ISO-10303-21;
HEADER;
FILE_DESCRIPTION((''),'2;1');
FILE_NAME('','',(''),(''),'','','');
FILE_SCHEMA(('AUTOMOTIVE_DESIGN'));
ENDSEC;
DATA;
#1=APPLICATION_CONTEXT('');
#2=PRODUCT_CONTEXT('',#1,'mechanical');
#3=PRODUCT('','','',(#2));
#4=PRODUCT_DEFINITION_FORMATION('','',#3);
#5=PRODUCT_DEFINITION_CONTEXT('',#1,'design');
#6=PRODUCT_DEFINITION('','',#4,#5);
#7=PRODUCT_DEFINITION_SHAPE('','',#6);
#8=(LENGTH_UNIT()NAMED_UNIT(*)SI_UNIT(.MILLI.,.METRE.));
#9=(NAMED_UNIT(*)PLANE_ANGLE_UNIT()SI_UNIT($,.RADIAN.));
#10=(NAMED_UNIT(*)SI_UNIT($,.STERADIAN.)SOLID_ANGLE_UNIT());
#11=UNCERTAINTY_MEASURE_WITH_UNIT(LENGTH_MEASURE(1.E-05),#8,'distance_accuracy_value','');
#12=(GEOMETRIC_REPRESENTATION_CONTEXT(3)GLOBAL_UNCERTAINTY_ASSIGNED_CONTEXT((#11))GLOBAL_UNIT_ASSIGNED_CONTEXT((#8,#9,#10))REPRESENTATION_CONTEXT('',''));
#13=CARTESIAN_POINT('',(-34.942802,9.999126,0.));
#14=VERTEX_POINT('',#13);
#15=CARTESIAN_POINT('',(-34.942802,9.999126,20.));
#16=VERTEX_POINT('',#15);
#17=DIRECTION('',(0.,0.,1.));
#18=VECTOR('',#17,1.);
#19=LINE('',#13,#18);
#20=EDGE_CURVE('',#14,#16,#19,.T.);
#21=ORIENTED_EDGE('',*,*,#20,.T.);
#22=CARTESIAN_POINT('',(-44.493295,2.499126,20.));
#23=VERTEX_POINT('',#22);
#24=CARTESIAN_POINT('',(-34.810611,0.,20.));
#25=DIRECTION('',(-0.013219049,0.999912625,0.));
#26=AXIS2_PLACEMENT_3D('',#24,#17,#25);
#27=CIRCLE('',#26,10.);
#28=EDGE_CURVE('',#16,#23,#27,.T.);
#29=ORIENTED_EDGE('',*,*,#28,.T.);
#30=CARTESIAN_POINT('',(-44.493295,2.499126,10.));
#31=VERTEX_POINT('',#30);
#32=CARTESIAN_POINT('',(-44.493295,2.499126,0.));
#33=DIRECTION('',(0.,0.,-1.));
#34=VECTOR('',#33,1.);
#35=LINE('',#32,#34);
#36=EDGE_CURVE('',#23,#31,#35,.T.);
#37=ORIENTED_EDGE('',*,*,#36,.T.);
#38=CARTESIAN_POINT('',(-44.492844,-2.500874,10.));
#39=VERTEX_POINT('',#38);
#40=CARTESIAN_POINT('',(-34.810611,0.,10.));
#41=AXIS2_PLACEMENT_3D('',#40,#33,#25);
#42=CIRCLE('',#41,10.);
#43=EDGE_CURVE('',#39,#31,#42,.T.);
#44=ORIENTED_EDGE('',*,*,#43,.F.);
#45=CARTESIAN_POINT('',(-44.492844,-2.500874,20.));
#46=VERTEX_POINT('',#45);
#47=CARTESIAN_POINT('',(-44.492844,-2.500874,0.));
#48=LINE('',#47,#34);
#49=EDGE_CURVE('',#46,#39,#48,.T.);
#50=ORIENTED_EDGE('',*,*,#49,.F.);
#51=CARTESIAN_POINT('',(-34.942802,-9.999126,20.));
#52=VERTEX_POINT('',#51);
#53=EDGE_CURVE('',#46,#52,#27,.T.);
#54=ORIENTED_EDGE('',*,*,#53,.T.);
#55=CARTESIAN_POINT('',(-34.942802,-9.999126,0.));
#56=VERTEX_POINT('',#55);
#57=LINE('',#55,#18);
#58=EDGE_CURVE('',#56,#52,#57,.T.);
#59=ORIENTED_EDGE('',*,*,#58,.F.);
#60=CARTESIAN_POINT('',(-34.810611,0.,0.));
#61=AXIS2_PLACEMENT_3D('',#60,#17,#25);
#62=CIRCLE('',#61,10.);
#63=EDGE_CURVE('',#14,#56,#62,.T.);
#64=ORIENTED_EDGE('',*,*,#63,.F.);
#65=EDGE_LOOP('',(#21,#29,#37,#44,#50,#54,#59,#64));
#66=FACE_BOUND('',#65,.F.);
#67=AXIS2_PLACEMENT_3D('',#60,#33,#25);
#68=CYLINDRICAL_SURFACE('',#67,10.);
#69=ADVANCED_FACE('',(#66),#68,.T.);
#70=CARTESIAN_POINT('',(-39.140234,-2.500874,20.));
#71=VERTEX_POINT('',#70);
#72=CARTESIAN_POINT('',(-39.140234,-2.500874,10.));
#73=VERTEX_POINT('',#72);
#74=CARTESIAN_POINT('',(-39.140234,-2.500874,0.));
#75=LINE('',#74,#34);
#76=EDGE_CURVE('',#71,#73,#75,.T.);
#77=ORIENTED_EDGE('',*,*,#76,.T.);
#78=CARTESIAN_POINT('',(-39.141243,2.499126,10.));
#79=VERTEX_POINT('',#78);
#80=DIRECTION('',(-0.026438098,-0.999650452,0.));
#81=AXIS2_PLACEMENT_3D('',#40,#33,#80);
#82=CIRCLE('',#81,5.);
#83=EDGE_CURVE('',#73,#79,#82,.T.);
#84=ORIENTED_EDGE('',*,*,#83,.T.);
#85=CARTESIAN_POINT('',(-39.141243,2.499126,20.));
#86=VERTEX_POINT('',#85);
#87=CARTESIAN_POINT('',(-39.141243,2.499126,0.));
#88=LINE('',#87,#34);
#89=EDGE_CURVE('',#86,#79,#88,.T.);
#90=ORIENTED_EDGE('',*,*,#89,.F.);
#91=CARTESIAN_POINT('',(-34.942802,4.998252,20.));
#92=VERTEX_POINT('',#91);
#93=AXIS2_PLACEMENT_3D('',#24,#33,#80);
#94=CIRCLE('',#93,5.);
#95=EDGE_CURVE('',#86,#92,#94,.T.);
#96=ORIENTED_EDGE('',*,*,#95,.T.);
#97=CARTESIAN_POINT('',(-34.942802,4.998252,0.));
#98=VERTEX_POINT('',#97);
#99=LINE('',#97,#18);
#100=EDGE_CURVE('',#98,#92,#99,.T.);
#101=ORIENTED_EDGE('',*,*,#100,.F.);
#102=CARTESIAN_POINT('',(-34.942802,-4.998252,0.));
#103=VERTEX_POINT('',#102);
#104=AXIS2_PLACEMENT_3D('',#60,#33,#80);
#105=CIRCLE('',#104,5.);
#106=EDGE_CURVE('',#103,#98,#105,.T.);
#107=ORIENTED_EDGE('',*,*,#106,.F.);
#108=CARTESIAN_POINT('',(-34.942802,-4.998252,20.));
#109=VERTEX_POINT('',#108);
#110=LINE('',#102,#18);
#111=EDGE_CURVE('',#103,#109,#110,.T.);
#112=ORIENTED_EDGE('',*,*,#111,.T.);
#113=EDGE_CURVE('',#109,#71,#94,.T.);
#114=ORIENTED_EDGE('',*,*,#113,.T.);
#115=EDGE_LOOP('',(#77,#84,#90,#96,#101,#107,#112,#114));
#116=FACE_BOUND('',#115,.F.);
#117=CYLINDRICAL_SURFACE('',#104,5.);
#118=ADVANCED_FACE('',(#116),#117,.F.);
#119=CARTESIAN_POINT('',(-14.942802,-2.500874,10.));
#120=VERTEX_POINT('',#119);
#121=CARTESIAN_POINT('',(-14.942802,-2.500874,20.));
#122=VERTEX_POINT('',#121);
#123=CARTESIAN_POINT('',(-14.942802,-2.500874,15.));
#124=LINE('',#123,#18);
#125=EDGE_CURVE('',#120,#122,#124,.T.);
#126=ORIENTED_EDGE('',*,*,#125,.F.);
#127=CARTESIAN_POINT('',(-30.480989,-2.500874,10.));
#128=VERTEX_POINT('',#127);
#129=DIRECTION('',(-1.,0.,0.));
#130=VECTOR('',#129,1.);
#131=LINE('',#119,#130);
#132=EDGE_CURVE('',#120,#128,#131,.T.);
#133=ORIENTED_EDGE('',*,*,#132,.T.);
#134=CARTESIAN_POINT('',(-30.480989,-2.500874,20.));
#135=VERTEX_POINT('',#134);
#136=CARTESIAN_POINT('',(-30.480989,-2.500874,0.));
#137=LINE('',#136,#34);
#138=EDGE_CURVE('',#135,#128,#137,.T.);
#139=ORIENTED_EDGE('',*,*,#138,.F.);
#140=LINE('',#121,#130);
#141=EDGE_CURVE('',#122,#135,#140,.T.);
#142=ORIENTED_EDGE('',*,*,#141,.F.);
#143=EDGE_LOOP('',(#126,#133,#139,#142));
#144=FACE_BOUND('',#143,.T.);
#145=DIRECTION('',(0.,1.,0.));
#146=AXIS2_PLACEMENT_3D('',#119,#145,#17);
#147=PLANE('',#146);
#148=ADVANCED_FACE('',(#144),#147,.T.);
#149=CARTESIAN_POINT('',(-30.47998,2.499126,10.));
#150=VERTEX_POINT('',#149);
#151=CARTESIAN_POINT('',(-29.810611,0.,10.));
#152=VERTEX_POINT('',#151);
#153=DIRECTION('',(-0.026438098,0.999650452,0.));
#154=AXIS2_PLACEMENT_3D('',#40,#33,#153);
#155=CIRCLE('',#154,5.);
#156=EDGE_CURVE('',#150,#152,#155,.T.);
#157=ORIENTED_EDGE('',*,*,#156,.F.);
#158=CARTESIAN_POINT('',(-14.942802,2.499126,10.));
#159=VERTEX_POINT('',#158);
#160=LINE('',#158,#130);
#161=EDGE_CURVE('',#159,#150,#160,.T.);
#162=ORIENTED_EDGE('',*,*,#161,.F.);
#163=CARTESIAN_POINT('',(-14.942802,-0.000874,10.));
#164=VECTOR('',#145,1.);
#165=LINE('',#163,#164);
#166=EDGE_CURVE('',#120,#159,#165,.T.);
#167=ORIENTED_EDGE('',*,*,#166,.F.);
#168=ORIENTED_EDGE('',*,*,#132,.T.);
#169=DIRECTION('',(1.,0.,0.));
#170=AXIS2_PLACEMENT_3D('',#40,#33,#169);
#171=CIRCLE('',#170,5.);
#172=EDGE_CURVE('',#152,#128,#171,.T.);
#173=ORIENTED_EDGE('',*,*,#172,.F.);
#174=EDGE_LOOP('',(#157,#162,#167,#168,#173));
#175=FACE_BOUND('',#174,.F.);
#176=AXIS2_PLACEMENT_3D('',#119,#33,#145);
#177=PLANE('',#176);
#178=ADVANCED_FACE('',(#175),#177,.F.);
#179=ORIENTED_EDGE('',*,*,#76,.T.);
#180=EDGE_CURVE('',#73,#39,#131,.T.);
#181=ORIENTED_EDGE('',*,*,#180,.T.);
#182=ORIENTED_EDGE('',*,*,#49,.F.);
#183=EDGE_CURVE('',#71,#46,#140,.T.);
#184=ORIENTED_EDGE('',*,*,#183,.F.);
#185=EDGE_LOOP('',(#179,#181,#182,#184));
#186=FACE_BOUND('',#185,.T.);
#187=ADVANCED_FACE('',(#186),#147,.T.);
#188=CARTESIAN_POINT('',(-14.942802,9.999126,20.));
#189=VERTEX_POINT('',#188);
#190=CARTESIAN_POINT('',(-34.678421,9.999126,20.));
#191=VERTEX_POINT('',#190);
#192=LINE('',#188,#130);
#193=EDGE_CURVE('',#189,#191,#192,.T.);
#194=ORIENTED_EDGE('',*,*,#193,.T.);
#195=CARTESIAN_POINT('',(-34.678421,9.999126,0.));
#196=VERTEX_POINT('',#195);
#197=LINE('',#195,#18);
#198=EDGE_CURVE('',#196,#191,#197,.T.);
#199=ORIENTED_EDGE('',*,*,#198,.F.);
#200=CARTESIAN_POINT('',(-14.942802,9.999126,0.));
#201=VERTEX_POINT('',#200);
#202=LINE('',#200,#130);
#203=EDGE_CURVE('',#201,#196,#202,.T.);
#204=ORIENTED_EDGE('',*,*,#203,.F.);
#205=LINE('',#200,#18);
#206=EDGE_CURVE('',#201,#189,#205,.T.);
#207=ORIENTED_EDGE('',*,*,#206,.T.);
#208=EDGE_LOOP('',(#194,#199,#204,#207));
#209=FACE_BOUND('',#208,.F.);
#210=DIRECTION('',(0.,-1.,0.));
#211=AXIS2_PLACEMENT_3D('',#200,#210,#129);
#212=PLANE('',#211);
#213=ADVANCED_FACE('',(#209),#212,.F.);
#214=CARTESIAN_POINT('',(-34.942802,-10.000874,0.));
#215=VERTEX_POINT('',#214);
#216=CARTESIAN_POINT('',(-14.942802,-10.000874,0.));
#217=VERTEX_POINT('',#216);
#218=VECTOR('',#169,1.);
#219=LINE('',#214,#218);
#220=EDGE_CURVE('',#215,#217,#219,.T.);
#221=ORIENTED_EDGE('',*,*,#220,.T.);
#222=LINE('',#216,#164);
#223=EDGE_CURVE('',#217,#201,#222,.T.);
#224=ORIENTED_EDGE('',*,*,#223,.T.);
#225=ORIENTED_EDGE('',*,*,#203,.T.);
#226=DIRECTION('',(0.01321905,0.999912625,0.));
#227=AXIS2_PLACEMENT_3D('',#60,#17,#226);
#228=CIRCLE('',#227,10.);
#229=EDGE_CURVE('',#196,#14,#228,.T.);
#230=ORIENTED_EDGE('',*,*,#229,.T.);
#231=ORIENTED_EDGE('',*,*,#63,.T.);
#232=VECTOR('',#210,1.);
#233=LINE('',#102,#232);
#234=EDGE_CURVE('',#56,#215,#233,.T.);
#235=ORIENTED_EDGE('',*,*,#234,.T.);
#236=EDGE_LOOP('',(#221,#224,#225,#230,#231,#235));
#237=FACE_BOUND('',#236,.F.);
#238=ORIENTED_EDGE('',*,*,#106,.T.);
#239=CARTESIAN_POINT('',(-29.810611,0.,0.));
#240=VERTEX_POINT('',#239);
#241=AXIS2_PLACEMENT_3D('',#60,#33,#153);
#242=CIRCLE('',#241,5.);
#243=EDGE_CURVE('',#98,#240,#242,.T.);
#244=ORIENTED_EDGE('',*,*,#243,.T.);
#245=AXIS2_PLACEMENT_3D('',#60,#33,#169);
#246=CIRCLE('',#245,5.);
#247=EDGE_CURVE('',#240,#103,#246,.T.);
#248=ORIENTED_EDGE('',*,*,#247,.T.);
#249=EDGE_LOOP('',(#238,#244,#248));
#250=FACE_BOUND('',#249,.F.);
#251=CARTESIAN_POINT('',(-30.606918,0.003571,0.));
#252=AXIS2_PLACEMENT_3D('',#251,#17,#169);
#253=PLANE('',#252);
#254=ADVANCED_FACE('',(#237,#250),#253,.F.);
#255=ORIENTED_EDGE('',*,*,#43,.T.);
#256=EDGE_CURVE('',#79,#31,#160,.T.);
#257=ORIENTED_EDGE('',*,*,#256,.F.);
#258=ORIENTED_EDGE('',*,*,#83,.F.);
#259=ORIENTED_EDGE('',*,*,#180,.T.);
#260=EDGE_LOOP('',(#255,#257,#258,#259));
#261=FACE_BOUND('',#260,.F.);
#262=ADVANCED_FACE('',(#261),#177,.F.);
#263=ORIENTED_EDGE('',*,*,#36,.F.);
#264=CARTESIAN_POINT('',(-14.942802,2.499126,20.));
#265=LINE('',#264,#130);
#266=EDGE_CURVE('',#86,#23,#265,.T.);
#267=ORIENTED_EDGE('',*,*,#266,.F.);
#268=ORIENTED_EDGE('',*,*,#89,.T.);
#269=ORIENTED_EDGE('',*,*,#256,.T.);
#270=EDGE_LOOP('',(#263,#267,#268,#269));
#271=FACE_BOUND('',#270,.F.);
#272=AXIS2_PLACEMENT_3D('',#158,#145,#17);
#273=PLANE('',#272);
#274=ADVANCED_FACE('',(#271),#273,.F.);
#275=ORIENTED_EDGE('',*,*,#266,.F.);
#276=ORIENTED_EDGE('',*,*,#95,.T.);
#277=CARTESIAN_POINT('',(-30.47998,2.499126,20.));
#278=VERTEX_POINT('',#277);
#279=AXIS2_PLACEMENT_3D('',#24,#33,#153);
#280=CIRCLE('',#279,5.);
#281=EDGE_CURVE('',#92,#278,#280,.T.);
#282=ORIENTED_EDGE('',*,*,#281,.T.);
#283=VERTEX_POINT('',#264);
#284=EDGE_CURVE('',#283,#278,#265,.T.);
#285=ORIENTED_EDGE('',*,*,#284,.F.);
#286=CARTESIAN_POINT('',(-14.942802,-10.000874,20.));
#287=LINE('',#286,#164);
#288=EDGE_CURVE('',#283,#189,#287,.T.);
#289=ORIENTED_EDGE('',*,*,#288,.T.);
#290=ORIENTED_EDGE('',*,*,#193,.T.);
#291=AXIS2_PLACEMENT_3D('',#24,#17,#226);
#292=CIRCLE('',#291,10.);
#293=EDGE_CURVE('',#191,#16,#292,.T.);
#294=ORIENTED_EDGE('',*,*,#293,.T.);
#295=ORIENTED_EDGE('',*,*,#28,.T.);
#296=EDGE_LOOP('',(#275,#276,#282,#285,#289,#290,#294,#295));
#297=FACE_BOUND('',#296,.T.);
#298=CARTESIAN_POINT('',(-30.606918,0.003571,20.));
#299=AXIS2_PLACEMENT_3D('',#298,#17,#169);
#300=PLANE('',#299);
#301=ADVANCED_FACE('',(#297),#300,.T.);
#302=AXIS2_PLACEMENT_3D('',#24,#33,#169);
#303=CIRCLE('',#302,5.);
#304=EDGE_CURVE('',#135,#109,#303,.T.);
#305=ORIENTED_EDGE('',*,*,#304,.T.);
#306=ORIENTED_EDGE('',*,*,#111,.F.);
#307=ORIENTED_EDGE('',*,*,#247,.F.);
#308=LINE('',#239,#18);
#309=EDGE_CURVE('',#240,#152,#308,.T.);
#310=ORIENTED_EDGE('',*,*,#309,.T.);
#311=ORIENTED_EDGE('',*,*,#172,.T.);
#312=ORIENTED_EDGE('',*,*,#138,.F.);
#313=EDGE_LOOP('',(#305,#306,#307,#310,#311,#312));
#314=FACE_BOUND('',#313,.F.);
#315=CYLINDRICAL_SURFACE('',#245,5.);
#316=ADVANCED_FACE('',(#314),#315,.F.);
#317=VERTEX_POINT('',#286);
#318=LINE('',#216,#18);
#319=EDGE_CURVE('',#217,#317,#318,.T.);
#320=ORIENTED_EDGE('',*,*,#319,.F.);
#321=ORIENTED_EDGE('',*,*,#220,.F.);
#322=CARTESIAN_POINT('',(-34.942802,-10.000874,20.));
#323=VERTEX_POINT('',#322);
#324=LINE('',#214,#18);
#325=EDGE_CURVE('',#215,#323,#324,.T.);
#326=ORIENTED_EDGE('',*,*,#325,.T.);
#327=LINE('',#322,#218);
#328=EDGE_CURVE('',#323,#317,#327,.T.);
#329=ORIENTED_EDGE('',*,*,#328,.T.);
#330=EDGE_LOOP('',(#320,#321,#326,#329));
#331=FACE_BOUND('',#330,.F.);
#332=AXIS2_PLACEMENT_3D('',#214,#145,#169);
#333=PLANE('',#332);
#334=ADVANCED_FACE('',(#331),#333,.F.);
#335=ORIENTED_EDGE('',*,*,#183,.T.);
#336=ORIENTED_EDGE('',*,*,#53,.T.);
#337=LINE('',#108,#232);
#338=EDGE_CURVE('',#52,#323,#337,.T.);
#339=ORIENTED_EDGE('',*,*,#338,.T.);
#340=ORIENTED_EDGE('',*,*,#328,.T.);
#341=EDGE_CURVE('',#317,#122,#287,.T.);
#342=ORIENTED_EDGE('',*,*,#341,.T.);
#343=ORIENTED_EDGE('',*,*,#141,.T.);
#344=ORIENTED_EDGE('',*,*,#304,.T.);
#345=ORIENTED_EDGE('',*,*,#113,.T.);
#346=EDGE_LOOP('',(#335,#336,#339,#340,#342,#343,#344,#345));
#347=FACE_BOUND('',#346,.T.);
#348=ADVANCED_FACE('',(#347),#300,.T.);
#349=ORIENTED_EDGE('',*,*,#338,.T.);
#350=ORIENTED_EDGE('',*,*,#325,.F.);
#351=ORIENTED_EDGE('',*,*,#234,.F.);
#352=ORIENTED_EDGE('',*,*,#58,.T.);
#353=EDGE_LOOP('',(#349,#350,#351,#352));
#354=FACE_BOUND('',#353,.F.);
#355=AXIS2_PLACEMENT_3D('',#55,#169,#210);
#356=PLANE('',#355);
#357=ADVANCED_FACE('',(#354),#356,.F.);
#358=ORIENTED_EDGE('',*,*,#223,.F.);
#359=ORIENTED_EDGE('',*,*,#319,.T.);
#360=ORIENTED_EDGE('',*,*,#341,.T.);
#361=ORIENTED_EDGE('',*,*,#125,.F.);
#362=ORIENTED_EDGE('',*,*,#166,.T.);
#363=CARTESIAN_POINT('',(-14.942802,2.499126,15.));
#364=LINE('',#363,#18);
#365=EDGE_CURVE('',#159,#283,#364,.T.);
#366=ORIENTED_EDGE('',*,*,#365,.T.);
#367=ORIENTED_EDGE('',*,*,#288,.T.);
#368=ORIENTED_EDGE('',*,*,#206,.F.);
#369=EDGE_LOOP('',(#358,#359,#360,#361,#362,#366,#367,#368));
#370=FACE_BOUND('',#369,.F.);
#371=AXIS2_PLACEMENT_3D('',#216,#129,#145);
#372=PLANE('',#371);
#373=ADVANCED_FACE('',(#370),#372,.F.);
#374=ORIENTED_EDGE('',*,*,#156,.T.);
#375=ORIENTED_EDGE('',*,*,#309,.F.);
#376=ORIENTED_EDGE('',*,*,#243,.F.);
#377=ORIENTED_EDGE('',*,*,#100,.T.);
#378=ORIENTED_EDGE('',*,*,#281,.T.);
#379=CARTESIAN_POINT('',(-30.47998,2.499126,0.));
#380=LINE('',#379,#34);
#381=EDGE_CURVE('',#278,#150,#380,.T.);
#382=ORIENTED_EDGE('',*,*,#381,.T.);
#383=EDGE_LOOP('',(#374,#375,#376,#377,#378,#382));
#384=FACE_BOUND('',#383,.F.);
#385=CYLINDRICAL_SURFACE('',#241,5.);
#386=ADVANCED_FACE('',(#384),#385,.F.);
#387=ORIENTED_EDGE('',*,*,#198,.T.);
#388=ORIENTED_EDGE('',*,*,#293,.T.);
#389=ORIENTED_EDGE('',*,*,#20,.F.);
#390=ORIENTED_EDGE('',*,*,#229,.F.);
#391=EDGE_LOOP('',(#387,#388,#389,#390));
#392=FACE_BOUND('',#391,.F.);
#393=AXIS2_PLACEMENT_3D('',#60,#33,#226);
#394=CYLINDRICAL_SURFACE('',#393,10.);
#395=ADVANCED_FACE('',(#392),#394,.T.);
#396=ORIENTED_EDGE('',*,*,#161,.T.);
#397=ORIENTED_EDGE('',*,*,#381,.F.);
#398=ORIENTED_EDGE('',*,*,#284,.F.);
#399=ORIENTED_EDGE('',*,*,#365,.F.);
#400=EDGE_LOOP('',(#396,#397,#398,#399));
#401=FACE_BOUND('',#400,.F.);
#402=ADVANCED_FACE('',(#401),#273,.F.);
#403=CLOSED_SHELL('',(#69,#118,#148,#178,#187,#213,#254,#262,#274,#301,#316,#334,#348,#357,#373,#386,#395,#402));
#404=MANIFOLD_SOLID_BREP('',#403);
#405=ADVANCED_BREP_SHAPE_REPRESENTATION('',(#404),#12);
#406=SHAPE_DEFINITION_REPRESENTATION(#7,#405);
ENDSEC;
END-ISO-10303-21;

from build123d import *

# Parameters (mm, degrees)
F1_DEPTH = 20
F2_W     = 5
F2_H     = 10
F3_DEPTH = 29.868809509


with BuildPart() as f1:
    # F0 (on Top) → F1 (new body)
    with BuildSketch(Plane.XY):
        with BuildLine():
            ThreePointArc((-34.9428019347, -9.9991262455), (-27.7864355102, -7.117650768), (-24.8106114437, 0))
            ThreePointArc((-24.8106114437, 0), (-27.6929606757, 7.0241759335), (-34.6784209527, 9.9991262455))
            Line((-34.6784209527, 9.9991262455), (-34.9428019347, 9.9991262455))
            Line((-34.9428019347, 9.9991262455), (-34.9428019347, 4.998252262))
            ThreePointArc((-34.9428019347, 4.998252262), (-31.3221269916, 3.581965414), (-29.8106114437, 0))
            ThreePointArc((-29.8106114437, 0), (-31.3221269916, -3.581965414), (-34.9428019347, -4.998252262))
            Line((-34.9428019347, -4.998252262), (-34.9428019347, -9.9991262455))
        make_face()
        with BuildLine():
            ThreePointArc((-34.6784209527, 9.9991262455), (-27.6929606757, 7.0241759335), (-24.8106114437, 0))
            ThreePointArc((-24.8106114437, 0), (-27.7864355102, -7.117650768), (-34.9428019347, -9.9991262455))
            Line((-34.9428019347, -9.9991262455), (-34.9428019347, -10.0008737545))
            Line((-34.9428019347, -10.0008737545), (-14.9428019347, -10.0008737545))
            Line((-14.9428019347, -10.0008737545), (-14.9428019347, 9.9991262455))
            Line((-14.9428019347, 9.9991262455), (-34.6784209527, 9.9991262455))
        make_face()
        with BuildLine():
            Line((-34.9428019347, 9.9991262455), (-34.6784209527, 9.9991262455))
            ThreePointArc((-34.6784209527, 9.9991262455), (-34.8106114437, 10), (-34.9428019347, 9.9991262455))
        make_face()
        with BuildLine():
            ThreePointArc((-34.9428019347, 9.9991262455), (-44.8106114437, 0), (-34.9428019347, -9.9991262455))
            Line((-34.9428019347, -9.9991262455), (-34.9428019347, -4.998252262))
            ThreePointArc((-34.9428019347, -4.998252262), (-39.8106114437, 0), (-34.9428019347, 4.998252262))
            Line((-34.9428019347, 4.998252262), (-34.9428019347, 9.9991262455))
        make_face()
    extrude(amount=F1_DEPTH)

    # F2 (on face) → F3 (cut, through all)
    with BuildSketch(Plane.YZ.offset(-14.9428019347)):
        with Locations((-0.0008737545, 15)):
            Rectangle(F2_W, F2_H)
    extrude(amount=-F3_DEPTH, mode=Mode.SUBTRACT)


solid = f1.part
